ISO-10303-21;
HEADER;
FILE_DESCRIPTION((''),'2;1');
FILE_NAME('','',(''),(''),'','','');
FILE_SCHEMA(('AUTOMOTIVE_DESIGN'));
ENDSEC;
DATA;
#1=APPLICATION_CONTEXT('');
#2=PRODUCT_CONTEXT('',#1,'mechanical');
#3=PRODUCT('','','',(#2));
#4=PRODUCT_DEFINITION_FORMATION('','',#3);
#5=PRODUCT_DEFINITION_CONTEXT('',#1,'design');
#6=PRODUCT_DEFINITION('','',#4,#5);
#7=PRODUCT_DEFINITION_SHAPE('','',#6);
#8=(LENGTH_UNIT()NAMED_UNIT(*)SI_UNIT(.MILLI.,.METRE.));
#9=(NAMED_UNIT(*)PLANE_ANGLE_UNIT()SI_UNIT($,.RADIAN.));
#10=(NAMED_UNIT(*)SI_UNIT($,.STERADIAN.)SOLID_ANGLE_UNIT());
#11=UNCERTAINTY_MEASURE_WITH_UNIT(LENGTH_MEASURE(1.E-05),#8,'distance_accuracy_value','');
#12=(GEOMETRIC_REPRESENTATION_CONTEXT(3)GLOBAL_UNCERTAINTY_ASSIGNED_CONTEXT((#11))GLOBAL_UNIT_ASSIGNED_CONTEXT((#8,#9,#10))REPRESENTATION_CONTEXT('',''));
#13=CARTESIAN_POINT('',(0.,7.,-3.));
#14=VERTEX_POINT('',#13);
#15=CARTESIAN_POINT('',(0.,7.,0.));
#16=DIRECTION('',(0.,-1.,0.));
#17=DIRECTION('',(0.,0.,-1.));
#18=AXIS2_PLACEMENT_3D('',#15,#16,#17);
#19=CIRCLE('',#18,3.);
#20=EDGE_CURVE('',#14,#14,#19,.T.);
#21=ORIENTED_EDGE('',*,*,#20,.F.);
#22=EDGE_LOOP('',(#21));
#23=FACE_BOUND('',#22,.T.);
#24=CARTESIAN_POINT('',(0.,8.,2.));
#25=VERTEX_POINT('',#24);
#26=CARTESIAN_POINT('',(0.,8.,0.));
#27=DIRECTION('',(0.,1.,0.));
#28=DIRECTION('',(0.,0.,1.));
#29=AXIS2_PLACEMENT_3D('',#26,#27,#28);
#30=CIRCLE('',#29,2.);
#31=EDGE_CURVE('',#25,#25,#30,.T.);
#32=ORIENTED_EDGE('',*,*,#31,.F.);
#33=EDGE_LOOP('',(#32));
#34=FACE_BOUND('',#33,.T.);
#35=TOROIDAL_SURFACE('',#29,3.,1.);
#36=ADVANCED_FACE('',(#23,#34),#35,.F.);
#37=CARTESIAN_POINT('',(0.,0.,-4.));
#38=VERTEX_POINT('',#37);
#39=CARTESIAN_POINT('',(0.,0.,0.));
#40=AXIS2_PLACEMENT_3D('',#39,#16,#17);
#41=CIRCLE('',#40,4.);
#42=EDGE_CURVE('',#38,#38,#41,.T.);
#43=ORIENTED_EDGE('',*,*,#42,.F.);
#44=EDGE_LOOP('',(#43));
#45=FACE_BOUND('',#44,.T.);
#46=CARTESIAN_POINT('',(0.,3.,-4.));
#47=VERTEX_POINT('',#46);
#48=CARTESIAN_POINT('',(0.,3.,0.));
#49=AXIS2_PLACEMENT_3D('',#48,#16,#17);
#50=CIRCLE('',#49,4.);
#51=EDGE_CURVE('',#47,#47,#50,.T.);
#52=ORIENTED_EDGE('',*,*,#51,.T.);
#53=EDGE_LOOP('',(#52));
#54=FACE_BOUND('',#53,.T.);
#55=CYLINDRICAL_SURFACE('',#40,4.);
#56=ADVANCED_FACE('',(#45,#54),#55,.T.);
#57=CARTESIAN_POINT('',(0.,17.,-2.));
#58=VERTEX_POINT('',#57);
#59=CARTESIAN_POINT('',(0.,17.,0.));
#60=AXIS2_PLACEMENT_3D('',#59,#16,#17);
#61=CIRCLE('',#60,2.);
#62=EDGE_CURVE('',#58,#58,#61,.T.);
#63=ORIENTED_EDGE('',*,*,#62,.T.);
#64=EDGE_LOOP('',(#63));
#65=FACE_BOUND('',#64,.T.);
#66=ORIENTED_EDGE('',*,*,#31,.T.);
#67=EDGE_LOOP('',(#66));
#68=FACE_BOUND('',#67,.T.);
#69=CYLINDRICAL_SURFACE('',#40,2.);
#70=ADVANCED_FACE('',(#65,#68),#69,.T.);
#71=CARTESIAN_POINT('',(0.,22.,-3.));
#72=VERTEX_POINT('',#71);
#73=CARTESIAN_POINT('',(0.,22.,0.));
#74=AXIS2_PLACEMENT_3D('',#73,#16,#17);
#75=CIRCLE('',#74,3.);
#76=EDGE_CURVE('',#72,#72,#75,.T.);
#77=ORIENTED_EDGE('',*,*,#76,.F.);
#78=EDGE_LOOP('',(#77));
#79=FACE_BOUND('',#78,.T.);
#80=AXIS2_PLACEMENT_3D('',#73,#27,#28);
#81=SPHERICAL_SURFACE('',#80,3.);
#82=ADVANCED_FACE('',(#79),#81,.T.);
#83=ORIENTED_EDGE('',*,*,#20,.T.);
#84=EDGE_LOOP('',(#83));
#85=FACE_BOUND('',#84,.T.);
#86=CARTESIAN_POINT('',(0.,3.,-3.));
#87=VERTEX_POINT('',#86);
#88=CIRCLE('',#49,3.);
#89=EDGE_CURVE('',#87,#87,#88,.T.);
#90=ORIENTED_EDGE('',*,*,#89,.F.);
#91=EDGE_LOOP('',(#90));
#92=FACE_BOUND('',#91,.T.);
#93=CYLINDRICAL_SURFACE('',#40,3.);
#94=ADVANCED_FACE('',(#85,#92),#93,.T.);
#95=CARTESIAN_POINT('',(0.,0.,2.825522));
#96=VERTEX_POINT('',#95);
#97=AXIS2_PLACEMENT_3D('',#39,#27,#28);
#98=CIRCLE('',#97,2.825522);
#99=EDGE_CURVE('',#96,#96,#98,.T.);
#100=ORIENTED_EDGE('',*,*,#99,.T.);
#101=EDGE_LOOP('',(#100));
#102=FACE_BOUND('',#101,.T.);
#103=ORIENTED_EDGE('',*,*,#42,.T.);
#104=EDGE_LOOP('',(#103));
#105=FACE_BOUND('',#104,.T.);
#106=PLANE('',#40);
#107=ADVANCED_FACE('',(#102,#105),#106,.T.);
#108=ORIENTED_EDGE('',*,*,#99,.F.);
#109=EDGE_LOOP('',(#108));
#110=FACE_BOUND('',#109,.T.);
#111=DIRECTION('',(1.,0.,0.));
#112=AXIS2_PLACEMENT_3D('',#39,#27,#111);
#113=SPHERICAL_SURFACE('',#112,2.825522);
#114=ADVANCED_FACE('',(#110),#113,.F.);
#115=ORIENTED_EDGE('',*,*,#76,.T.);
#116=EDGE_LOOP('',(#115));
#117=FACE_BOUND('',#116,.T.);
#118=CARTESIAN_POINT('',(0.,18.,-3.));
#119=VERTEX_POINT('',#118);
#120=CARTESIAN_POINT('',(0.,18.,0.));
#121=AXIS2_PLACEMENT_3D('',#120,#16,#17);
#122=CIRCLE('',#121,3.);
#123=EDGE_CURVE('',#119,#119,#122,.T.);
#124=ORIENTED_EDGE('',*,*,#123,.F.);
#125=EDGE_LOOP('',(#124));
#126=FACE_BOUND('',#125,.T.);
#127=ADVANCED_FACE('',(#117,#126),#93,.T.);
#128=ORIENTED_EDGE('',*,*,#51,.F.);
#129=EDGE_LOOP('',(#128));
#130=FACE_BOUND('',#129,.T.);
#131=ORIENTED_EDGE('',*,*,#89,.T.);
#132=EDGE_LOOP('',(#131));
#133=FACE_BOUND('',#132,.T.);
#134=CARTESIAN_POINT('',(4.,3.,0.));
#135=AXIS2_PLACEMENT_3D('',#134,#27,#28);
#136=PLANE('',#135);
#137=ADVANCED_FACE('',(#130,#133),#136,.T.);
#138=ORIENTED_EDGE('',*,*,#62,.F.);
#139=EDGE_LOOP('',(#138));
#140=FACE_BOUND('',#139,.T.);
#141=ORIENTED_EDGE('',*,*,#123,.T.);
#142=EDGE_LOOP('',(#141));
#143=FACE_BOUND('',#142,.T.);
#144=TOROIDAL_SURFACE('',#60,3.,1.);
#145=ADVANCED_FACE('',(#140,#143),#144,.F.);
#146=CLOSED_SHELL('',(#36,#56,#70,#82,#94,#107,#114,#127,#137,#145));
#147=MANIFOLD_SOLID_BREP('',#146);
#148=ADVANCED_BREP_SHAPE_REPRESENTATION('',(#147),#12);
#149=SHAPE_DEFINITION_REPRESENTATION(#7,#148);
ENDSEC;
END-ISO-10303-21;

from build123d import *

# Parameters (mm, degrees)
FILLET1_R = 3
FILLET2_R = 1


with BuildPart() as part:
    # Sketch1 → Revolve1 (revolve)
    with BuildSketch(Plane.XY, mode=Mode.PRIVATE) as revolve1_sk:
        Polygon((0, 0), (0, 25), (3, 25), (3, 18), (2, 18), (2, 7), (3, 7), (3, 3), (4, 3), (4, 0), align=None)
    revolve(revolve1_sk.sketch.rotate(Axis((0, 0, 0), (0, 1, 0)), 90), axis=Axis((0, 0, 0), (0, 1, 0)))

    # Fillet1
    fillet1_edges = [part.edges().sort_by_distance(p)[0] for p in [
        (0, 25, 3),
    ]]
    fillet(fillet1_edges, radius=FILLET1_R)

    # Fillet2
    fillet2_edges = [part.edges().sort_by_distance(p)[0] for p in [
        (0, 18, 2),
        (0, 7, 2),
    ]]
    fillet(fillet2_edges, radius=FILLET2_R - 0.0001)  # a hair under: the kernel refuses the full size

    # Sketch2 → Cut-Revolve1 (revolve, cut)
    with BuildSketch(Plane.XY, mode=Mode.PRIVATE) as cut_revolve1_sk:
        with BuildLine():
            Line((0, 2.825522326), (0, 0))
            Line((0, 0), (2.825522326, 0))
            ThreePointArc((2.825522326, 0), (1.997945997, 1.997945997), (0, 2.825522326))
        make_face()
    revolve(cut_revolve1_sk.sketch.rotate(Axis((0, 2.825522326, 0), (0, -1, 0)), 270), axis=Axis((0, 2.825522326, 0), (0, -1, 0)), mode=Mode.SUBTRACT)


solid = part.part
